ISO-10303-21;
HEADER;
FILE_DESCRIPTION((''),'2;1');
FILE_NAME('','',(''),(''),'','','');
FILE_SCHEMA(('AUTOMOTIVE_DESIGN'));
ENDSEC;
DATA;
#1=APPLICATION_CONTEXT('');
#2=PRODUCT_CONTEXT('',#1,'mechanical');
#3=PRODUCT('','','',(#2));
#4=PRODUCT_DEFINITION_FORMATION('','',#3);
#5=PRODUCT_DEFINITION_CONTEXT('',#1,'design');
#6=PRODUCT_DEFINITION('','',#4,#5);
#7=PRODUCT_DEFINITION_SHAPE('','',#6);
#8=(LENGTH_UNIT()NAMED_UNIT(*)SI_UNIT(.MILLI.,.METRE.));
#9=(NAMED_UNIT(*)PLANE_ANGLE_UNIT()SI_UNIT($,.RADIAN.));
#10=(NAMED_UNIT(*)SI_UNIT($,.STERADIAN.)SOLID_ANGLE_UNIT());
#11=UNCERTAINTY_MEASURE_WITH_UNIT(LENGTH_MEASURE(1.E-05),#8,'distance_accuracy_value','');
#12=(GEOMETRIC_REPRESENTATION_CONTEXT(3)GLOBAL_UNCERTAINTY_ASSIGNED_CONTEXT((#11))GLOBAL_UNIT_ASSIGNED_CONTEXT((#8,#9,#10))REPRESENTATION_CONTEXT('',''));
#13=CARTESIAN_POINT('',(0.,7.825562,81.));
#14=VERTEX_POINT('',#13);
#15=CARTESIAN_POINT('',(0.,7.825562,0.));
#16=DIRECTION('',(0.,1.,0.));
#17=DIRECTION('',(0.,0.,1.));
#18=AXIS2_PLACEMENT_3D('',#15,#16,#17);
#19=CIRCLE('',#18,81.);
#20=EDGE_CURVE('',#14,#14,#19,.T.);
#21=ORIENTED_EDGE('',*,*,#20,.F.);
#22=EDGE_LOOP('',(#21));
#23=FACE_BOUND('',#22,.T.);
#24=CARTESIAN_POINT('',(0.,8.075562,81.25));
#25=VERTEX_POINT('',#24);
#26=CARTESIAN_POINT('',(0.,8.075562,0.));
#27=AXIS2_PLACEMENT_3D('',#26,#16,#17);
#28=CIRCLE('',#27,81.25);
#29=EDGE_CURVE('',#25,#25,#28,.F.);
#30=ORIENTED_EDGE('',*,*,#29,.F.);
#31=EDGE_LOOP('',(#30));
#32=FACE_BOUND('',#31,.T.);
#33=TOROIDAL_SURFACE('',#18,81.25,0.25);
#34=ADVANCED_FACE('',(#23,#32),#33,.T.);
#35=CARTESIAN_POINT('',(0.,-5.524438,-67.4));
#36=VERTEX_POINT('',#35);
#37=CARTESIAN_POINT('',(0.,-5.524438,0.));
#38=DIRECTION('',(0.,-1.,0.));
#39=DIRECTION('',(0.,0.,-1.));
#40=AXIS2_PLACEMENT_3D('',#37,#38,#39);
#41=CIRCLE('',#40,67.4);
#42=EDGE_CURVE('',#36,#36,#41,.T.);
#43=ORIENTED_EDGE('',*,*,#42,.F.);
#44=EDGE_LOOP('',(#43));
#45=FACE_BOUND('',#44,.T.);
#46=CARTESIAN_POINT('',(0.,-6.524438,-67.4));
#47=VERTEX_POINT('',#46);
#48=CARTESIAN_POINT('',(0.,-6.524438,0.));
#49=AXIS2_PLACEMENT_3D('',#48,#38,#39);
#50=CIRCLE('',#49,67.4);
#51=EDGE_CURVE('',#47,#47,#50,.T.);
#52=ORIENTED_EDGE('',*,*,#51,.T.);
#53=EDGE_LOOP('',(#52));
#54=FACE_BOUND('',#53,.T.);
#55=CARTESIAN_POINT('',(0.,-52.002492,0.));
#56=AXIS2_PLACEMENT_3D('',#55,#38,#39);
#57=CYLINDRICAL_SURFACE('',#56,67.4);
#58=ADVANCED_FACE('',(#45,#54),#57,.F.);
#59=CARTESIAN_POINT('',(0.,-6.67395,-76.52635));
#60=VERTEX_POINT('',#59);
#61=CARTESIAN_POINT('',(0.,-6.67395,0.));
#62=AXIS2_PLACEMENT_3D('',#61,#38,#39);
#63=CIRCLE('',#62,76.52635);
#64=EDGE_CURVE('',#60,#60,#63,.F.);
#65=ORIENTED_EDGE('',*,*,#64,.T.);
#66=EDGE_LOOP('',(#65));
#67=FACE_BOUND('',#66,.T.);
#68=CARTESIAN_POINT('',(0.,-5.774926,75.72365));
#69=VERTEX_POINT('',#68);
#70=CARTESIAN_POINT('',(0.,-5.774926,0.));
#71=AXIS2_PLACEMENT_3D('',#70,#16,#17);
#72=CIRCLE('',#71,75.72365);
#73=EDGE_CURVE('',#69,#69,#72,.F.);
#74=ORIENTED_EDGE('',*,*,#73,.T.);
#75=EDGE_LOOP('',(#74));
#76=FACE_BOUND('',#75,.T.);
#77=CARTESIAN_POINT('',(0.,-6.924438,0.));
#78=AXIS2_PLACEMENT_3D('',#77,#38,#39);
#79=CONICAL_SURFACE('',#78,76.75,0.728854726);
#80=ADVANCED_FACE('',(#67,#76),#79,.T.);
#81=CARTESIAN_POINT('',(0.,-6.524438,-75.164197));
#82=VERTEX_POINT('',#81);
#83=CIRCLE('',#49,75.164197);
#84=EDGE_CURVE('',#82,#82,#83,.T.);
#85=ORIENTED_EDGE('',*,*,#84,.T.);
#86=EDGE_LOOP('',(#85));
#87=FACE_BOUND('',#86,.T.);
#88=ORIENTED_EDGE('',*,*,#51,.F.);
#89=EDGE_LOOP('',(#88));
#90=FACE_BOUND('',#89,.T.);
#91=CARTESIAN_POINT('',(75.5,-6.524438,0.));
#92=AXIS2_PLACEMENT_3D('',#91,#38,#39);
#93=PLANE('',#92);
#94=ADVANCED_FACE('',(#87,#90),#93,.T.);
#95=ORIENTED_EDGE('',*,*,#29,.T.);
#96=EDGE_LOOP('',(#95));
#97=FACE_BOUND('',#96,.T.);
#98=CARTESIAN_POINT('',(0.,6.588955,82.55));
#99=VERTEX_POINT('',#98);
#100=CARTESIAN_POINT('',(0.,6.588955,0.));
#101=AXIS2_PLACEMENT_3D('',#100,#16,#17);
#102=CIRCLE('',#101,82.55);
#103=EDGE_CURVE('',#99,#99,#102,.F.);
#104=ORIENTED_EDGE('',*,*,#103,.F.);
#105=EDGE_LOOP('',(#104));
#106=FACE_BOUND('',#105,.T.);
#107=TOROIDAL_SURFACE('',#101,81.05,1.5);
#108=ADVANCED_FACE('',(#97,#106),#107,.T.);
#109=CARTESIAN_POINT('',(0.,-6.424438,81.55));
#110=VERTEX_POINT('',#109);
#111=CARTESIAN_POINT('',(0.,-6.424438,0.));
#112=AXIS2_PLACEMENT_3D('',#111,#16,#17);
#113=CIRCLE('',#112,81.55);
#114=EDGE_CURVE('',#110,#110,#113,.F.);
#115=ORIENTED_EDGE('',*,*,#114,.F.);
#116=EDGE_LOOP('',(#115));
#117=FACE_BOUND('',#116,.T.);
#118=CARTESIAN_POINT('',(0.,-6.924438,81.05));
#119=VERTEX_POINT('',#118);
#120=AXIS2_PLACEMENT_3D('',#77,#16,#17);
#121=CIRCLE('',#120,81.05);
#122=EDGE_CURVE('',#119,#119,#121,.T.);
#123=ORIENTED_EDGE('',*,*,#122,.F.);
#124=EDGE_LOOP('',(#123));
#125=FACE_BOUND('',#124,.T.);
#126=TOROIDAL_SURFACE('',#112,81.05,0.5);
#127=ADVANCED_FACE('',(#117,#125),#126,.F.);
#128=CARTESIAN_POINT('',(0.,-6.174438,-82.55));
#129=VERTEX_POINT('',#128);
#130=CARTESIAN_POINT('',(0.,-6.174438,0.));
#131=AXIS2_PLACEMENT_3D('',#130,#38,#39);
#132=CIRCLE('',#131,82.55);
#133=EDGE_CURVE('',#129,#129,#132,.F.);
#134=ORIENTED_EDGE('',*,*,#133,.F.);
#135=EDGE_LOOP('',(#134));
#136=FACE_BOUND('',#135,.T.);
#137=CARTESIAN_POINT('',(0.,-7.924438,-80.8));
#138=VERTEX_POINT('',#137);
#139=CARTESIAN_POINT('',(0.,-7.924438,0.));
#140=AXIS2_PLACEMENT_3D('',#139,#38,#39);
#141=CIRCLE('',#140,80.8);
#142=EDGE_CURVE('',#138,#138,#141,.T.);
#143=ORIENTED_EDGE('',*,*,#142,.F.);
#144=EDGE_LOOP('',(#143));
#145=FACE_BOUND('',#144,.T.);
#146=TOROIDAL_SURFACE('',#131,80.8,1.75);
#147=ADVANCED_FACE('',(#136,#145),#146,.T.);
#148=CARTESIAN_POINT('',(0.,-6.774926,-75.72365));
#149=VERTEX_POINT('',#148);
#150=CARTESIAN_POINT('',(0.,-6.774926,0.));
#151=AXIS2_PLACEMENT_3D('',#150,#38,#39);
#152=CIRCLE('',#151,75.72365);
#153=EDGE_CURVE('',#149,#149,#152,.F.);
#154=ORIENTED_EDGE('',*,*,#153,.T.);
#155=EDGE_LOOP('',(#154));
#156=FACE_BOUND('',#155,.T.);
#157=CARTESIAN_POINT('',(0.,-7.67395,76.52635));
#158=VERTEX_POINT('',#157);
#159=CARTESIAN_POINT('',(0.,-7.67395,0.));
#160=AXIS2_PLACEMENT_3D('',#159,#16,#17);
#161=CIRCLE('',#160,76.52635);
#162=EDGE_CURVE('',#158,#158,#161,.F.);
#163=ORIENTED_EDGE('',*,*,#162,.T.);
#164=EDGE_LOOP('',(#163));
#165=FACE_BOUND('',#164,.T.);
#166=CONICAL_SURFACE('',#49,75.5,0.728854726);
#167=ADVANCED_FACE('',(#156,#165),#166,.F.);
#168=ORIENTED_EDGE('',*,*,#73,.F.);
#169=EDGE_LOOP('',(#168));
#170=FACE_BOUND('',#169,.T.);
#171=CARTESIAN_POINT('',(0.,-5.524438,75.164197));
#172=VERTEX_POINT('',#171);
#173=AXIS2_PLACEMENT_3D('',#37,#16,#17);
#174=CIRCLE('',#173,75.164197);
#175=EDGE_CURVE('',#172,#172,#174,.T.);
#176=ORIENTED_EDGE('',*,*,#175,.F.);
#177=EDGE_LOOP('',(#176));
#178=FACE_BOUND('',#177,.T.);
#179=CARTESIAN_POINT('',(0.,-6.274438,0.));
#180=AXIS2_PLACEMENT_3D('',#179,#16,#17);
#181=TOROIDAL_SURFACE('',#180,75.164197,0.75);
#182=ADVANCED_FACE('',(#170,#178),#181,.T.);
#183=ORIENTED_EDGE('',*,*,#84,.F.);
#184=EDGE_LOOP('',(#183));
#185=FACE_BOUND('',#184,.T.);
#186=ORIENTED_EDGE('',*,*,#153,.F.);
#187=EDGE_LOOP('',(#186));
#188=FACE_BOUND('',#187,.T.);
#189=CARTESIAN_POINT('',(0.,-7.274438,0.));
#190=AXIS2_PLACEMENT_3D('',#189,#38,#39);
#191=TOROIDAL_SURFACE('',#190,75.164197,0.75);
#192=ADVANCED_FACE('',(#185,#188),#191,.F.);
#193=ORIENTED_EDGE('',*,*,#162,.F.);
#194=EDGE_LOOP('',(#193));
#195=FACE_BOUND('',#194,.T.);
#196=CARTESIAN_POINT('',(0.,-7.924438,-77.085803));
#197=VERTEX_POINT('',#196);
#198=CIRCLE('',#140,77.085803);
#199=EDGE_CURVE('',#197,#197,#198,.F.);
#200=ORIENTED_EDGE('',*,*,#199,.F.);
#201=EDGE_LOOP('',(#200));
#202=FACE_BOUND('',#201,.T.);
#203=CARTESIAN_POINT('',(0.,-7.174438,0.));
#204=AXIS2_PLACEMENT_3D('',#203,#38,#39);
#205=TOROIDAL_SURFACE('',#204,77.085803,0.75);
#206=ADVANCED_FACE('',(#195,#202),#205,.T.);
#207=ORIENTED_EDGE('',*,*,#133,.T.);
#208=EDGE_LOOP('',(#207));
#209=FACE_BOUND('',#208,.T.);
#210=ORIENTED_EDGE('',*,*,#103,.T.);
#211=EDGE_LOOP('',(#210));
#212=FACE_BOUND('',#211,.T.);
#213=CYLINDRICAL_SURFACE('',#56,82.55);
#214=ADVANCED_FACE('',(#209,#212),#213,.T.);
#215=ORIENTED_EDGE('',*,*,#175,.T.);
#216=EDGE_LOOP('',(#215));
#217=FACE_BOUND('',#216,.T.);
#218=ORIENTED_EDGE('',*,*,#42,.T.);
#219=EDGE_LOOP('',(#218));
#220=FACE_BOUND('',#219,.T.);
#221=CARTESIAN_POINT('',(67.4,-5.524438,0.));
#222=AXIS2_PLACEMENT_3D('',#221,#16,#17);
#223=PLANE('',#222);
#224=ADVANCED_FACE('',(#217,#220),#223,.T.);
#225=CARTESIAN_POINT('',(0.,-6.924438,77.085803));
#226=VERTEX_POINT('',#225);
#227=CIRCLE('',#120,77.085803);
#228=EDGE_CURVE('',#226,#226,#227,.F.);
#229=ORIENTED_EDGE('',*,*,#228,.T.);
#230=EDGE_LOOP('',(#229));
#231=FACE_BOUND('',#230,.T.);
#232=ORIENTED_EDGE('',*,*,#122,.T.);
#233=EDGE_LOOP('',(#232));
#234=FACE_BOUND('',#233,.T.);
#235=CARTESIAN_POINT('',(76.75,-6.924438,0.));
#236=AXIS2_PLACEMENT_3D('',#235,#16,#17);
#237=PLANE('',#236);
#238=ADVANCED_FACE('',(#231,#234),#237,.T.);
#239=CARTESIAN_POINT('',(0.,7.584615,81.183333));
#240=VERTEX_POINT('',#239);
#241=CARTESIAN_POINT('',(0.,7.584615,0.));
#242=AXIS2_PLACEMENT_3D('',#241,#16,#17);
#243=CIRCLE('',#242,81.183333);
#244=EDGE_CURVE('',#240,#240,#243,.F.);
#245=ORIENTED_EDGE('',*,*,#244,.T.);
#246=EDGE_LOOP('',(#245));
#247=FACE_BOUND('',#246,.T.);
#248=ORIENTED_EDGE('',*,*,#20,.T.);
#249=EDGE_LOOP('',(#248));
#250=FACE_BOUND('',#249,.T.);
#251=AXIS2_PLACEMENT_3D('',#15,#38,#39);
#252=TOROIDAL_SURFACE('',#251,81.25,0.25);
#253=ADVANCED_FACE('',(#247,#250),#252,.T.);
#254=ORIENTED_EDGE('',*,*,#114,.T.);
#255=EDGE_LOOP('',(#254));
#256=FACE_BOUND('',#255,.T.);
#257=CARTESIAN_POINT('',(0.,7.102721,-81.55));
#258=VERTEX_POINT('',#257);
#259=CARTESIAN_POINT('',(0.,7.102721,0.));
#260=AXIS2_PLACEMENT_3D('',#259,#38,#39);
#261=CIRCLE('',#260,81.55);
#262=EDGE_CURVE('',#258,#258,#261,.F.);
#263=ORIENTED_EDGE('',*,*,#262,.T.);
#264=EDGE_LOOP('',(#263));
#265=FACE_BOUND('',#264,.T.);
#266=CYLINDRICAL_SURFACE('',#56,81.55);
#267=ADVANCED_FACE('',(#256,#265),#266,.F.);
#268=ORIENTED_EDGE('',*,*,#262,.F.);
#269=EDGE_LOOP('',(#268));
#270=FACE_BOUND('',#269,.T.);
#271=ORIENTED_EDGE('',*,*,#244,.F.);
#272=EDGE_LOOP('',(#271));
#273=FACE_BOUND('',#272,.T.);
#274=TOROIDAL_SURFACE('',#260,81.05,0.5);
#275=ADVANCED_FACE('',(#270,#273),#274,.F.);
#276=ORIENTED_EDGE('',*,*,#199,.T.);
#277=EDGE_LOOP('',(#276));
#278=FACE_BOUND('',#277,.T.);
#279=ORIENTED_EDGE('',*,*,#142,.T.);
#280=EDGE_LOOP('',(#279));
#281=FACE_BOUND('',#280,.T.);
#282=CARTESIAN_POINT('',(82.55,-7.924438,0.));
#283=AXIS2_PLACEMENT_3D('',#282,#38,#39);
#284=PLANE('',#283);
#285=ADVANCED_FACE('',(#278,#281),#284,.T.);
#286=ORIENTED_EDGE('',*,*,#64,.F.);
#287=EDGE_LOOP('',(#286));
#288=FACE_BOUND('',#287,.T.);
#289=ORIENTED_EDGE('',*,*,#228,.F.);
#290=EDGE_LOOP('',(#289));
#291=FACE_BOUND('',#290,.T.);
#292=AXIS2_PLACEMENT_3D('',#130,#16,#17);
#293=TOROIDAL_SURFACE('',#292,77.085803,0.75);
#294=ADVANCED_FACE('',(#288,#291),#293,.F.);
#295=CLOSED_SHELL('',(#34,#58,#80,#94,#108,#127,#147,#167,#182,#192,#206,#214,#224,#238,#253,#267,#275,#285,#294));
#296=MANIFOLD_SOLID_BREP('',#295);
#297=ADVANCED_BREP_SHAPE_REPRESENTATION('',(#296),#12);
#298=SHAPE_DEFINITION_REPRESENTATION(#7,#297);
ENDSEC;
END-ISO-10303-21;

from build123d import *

# Parameters (mm, degrees)
FILETE2_R = 0.25
FILETE3_R = 1.5
FILETE4_R = 0.5
FILETE5_R = 1.75
FILETE6_R = 0.5
FILETE7_R = 0.75


# Some blends are built 0.0001 mm under size
with BuildPart() as part:
    # Esboço1 → Revolução1 (revolve)
    with BuildSketch(Plane.XY, mode=Mode.PRIVATE) as revolu_o1_sk:
        Polygon((81, 7.575562227), (81, 8.075562227), (82.55, 8.075562227), (82.55, -7.924437773), (76.75, -7.924437773), (75.5, -6.524437773), (67.4, -6.524437773), (67.4, -5.524437773), (75.5, -5.524437773), (76.75, -6.924437773), (81.55, -6.924437773), (81.55, 7.575562227), align=None)
    revolve(revolu_o1_sk.sketch.rotate(Axis((0, -52.002491694, 0), (0, 1, 0)), 90), axis=Axis((0, -52.002491694, 0), (0, 1, 0)))

    # Filete2
    filete2_edges = [part.edges().sort_by_distance(p)[0] for p in [
        (0, 8.075562227, 81),
        (0, 7.575562227, 81),
    ]]
    fillet(filete2_edges, radius=FILETE2_R - 0.0001)  # a hair under: the kernel refuses the full size

    # Filete3
    # the kernel refuses this fillet: 1.5 mm, written as the material it takes off along each edge
    with BuildSketch(Plane(origin=(0, 8.075562227, 0), x_dir=(0, 0, -1), z_dir=(1, 0, 0))) as filete3_piece_1:
        with BuildLine():
            CenterArc((81.05, -1.486620325), FILETE3_R, 0, 82.341598453)
            Line((82.55, -1.486620325), (82.58, -1.486620325))
            Line((82.58, -1.486620325), (82.58, 0))
            Line((82.58, 0), (82.55, 0.03))
            ThreePointArc((82.55, 0.03), (81.89995, 0.03), (81.253898, 0.029732406))
            Line((81.253898, 0.029732406), (81.2499, 0))
        make_face()
    revolve(axis=Axis((0, 8.075562227, 0), (0, 1, 0)), mode=Mode.SUBTRACT)

    # Filete4
    filete4_edges = [part.edges().sort_by_distance(p)[0] for p in [
        (0, 7.575562227, 81.55),
    ]]
    fillet(filete4_edges, radius=FILETE4_R)

    # Filete5
    filete5_edges = [part.edges().sort_by_distance(p)[0] for p in [
        (0, -7.924437773, 82.55),
    ]]
    fillet(filete5_edges, radius=FILETE5_R)

    # Filete6
    filete6_edges = [part.edges().sort_by_distance(p)[0] for p in [
        (0, -6.924437773, 81.55),
    ]]
    fillet(filete6_edges, radius=FILETE6_R)

    # Filete7
    filete7_edges = [part.edges().sort_by_distance(p)[0] for p in [
        (0, -6.524437773, 75.5),
        (0, -7.924437773, 76.75),
        (0, -6.924437773, 76.75),
        (0, -5.524437773, 75.5),
    ]]
    fillet(filete7_edges, radius=FILETE7_R)


solid = part.part
